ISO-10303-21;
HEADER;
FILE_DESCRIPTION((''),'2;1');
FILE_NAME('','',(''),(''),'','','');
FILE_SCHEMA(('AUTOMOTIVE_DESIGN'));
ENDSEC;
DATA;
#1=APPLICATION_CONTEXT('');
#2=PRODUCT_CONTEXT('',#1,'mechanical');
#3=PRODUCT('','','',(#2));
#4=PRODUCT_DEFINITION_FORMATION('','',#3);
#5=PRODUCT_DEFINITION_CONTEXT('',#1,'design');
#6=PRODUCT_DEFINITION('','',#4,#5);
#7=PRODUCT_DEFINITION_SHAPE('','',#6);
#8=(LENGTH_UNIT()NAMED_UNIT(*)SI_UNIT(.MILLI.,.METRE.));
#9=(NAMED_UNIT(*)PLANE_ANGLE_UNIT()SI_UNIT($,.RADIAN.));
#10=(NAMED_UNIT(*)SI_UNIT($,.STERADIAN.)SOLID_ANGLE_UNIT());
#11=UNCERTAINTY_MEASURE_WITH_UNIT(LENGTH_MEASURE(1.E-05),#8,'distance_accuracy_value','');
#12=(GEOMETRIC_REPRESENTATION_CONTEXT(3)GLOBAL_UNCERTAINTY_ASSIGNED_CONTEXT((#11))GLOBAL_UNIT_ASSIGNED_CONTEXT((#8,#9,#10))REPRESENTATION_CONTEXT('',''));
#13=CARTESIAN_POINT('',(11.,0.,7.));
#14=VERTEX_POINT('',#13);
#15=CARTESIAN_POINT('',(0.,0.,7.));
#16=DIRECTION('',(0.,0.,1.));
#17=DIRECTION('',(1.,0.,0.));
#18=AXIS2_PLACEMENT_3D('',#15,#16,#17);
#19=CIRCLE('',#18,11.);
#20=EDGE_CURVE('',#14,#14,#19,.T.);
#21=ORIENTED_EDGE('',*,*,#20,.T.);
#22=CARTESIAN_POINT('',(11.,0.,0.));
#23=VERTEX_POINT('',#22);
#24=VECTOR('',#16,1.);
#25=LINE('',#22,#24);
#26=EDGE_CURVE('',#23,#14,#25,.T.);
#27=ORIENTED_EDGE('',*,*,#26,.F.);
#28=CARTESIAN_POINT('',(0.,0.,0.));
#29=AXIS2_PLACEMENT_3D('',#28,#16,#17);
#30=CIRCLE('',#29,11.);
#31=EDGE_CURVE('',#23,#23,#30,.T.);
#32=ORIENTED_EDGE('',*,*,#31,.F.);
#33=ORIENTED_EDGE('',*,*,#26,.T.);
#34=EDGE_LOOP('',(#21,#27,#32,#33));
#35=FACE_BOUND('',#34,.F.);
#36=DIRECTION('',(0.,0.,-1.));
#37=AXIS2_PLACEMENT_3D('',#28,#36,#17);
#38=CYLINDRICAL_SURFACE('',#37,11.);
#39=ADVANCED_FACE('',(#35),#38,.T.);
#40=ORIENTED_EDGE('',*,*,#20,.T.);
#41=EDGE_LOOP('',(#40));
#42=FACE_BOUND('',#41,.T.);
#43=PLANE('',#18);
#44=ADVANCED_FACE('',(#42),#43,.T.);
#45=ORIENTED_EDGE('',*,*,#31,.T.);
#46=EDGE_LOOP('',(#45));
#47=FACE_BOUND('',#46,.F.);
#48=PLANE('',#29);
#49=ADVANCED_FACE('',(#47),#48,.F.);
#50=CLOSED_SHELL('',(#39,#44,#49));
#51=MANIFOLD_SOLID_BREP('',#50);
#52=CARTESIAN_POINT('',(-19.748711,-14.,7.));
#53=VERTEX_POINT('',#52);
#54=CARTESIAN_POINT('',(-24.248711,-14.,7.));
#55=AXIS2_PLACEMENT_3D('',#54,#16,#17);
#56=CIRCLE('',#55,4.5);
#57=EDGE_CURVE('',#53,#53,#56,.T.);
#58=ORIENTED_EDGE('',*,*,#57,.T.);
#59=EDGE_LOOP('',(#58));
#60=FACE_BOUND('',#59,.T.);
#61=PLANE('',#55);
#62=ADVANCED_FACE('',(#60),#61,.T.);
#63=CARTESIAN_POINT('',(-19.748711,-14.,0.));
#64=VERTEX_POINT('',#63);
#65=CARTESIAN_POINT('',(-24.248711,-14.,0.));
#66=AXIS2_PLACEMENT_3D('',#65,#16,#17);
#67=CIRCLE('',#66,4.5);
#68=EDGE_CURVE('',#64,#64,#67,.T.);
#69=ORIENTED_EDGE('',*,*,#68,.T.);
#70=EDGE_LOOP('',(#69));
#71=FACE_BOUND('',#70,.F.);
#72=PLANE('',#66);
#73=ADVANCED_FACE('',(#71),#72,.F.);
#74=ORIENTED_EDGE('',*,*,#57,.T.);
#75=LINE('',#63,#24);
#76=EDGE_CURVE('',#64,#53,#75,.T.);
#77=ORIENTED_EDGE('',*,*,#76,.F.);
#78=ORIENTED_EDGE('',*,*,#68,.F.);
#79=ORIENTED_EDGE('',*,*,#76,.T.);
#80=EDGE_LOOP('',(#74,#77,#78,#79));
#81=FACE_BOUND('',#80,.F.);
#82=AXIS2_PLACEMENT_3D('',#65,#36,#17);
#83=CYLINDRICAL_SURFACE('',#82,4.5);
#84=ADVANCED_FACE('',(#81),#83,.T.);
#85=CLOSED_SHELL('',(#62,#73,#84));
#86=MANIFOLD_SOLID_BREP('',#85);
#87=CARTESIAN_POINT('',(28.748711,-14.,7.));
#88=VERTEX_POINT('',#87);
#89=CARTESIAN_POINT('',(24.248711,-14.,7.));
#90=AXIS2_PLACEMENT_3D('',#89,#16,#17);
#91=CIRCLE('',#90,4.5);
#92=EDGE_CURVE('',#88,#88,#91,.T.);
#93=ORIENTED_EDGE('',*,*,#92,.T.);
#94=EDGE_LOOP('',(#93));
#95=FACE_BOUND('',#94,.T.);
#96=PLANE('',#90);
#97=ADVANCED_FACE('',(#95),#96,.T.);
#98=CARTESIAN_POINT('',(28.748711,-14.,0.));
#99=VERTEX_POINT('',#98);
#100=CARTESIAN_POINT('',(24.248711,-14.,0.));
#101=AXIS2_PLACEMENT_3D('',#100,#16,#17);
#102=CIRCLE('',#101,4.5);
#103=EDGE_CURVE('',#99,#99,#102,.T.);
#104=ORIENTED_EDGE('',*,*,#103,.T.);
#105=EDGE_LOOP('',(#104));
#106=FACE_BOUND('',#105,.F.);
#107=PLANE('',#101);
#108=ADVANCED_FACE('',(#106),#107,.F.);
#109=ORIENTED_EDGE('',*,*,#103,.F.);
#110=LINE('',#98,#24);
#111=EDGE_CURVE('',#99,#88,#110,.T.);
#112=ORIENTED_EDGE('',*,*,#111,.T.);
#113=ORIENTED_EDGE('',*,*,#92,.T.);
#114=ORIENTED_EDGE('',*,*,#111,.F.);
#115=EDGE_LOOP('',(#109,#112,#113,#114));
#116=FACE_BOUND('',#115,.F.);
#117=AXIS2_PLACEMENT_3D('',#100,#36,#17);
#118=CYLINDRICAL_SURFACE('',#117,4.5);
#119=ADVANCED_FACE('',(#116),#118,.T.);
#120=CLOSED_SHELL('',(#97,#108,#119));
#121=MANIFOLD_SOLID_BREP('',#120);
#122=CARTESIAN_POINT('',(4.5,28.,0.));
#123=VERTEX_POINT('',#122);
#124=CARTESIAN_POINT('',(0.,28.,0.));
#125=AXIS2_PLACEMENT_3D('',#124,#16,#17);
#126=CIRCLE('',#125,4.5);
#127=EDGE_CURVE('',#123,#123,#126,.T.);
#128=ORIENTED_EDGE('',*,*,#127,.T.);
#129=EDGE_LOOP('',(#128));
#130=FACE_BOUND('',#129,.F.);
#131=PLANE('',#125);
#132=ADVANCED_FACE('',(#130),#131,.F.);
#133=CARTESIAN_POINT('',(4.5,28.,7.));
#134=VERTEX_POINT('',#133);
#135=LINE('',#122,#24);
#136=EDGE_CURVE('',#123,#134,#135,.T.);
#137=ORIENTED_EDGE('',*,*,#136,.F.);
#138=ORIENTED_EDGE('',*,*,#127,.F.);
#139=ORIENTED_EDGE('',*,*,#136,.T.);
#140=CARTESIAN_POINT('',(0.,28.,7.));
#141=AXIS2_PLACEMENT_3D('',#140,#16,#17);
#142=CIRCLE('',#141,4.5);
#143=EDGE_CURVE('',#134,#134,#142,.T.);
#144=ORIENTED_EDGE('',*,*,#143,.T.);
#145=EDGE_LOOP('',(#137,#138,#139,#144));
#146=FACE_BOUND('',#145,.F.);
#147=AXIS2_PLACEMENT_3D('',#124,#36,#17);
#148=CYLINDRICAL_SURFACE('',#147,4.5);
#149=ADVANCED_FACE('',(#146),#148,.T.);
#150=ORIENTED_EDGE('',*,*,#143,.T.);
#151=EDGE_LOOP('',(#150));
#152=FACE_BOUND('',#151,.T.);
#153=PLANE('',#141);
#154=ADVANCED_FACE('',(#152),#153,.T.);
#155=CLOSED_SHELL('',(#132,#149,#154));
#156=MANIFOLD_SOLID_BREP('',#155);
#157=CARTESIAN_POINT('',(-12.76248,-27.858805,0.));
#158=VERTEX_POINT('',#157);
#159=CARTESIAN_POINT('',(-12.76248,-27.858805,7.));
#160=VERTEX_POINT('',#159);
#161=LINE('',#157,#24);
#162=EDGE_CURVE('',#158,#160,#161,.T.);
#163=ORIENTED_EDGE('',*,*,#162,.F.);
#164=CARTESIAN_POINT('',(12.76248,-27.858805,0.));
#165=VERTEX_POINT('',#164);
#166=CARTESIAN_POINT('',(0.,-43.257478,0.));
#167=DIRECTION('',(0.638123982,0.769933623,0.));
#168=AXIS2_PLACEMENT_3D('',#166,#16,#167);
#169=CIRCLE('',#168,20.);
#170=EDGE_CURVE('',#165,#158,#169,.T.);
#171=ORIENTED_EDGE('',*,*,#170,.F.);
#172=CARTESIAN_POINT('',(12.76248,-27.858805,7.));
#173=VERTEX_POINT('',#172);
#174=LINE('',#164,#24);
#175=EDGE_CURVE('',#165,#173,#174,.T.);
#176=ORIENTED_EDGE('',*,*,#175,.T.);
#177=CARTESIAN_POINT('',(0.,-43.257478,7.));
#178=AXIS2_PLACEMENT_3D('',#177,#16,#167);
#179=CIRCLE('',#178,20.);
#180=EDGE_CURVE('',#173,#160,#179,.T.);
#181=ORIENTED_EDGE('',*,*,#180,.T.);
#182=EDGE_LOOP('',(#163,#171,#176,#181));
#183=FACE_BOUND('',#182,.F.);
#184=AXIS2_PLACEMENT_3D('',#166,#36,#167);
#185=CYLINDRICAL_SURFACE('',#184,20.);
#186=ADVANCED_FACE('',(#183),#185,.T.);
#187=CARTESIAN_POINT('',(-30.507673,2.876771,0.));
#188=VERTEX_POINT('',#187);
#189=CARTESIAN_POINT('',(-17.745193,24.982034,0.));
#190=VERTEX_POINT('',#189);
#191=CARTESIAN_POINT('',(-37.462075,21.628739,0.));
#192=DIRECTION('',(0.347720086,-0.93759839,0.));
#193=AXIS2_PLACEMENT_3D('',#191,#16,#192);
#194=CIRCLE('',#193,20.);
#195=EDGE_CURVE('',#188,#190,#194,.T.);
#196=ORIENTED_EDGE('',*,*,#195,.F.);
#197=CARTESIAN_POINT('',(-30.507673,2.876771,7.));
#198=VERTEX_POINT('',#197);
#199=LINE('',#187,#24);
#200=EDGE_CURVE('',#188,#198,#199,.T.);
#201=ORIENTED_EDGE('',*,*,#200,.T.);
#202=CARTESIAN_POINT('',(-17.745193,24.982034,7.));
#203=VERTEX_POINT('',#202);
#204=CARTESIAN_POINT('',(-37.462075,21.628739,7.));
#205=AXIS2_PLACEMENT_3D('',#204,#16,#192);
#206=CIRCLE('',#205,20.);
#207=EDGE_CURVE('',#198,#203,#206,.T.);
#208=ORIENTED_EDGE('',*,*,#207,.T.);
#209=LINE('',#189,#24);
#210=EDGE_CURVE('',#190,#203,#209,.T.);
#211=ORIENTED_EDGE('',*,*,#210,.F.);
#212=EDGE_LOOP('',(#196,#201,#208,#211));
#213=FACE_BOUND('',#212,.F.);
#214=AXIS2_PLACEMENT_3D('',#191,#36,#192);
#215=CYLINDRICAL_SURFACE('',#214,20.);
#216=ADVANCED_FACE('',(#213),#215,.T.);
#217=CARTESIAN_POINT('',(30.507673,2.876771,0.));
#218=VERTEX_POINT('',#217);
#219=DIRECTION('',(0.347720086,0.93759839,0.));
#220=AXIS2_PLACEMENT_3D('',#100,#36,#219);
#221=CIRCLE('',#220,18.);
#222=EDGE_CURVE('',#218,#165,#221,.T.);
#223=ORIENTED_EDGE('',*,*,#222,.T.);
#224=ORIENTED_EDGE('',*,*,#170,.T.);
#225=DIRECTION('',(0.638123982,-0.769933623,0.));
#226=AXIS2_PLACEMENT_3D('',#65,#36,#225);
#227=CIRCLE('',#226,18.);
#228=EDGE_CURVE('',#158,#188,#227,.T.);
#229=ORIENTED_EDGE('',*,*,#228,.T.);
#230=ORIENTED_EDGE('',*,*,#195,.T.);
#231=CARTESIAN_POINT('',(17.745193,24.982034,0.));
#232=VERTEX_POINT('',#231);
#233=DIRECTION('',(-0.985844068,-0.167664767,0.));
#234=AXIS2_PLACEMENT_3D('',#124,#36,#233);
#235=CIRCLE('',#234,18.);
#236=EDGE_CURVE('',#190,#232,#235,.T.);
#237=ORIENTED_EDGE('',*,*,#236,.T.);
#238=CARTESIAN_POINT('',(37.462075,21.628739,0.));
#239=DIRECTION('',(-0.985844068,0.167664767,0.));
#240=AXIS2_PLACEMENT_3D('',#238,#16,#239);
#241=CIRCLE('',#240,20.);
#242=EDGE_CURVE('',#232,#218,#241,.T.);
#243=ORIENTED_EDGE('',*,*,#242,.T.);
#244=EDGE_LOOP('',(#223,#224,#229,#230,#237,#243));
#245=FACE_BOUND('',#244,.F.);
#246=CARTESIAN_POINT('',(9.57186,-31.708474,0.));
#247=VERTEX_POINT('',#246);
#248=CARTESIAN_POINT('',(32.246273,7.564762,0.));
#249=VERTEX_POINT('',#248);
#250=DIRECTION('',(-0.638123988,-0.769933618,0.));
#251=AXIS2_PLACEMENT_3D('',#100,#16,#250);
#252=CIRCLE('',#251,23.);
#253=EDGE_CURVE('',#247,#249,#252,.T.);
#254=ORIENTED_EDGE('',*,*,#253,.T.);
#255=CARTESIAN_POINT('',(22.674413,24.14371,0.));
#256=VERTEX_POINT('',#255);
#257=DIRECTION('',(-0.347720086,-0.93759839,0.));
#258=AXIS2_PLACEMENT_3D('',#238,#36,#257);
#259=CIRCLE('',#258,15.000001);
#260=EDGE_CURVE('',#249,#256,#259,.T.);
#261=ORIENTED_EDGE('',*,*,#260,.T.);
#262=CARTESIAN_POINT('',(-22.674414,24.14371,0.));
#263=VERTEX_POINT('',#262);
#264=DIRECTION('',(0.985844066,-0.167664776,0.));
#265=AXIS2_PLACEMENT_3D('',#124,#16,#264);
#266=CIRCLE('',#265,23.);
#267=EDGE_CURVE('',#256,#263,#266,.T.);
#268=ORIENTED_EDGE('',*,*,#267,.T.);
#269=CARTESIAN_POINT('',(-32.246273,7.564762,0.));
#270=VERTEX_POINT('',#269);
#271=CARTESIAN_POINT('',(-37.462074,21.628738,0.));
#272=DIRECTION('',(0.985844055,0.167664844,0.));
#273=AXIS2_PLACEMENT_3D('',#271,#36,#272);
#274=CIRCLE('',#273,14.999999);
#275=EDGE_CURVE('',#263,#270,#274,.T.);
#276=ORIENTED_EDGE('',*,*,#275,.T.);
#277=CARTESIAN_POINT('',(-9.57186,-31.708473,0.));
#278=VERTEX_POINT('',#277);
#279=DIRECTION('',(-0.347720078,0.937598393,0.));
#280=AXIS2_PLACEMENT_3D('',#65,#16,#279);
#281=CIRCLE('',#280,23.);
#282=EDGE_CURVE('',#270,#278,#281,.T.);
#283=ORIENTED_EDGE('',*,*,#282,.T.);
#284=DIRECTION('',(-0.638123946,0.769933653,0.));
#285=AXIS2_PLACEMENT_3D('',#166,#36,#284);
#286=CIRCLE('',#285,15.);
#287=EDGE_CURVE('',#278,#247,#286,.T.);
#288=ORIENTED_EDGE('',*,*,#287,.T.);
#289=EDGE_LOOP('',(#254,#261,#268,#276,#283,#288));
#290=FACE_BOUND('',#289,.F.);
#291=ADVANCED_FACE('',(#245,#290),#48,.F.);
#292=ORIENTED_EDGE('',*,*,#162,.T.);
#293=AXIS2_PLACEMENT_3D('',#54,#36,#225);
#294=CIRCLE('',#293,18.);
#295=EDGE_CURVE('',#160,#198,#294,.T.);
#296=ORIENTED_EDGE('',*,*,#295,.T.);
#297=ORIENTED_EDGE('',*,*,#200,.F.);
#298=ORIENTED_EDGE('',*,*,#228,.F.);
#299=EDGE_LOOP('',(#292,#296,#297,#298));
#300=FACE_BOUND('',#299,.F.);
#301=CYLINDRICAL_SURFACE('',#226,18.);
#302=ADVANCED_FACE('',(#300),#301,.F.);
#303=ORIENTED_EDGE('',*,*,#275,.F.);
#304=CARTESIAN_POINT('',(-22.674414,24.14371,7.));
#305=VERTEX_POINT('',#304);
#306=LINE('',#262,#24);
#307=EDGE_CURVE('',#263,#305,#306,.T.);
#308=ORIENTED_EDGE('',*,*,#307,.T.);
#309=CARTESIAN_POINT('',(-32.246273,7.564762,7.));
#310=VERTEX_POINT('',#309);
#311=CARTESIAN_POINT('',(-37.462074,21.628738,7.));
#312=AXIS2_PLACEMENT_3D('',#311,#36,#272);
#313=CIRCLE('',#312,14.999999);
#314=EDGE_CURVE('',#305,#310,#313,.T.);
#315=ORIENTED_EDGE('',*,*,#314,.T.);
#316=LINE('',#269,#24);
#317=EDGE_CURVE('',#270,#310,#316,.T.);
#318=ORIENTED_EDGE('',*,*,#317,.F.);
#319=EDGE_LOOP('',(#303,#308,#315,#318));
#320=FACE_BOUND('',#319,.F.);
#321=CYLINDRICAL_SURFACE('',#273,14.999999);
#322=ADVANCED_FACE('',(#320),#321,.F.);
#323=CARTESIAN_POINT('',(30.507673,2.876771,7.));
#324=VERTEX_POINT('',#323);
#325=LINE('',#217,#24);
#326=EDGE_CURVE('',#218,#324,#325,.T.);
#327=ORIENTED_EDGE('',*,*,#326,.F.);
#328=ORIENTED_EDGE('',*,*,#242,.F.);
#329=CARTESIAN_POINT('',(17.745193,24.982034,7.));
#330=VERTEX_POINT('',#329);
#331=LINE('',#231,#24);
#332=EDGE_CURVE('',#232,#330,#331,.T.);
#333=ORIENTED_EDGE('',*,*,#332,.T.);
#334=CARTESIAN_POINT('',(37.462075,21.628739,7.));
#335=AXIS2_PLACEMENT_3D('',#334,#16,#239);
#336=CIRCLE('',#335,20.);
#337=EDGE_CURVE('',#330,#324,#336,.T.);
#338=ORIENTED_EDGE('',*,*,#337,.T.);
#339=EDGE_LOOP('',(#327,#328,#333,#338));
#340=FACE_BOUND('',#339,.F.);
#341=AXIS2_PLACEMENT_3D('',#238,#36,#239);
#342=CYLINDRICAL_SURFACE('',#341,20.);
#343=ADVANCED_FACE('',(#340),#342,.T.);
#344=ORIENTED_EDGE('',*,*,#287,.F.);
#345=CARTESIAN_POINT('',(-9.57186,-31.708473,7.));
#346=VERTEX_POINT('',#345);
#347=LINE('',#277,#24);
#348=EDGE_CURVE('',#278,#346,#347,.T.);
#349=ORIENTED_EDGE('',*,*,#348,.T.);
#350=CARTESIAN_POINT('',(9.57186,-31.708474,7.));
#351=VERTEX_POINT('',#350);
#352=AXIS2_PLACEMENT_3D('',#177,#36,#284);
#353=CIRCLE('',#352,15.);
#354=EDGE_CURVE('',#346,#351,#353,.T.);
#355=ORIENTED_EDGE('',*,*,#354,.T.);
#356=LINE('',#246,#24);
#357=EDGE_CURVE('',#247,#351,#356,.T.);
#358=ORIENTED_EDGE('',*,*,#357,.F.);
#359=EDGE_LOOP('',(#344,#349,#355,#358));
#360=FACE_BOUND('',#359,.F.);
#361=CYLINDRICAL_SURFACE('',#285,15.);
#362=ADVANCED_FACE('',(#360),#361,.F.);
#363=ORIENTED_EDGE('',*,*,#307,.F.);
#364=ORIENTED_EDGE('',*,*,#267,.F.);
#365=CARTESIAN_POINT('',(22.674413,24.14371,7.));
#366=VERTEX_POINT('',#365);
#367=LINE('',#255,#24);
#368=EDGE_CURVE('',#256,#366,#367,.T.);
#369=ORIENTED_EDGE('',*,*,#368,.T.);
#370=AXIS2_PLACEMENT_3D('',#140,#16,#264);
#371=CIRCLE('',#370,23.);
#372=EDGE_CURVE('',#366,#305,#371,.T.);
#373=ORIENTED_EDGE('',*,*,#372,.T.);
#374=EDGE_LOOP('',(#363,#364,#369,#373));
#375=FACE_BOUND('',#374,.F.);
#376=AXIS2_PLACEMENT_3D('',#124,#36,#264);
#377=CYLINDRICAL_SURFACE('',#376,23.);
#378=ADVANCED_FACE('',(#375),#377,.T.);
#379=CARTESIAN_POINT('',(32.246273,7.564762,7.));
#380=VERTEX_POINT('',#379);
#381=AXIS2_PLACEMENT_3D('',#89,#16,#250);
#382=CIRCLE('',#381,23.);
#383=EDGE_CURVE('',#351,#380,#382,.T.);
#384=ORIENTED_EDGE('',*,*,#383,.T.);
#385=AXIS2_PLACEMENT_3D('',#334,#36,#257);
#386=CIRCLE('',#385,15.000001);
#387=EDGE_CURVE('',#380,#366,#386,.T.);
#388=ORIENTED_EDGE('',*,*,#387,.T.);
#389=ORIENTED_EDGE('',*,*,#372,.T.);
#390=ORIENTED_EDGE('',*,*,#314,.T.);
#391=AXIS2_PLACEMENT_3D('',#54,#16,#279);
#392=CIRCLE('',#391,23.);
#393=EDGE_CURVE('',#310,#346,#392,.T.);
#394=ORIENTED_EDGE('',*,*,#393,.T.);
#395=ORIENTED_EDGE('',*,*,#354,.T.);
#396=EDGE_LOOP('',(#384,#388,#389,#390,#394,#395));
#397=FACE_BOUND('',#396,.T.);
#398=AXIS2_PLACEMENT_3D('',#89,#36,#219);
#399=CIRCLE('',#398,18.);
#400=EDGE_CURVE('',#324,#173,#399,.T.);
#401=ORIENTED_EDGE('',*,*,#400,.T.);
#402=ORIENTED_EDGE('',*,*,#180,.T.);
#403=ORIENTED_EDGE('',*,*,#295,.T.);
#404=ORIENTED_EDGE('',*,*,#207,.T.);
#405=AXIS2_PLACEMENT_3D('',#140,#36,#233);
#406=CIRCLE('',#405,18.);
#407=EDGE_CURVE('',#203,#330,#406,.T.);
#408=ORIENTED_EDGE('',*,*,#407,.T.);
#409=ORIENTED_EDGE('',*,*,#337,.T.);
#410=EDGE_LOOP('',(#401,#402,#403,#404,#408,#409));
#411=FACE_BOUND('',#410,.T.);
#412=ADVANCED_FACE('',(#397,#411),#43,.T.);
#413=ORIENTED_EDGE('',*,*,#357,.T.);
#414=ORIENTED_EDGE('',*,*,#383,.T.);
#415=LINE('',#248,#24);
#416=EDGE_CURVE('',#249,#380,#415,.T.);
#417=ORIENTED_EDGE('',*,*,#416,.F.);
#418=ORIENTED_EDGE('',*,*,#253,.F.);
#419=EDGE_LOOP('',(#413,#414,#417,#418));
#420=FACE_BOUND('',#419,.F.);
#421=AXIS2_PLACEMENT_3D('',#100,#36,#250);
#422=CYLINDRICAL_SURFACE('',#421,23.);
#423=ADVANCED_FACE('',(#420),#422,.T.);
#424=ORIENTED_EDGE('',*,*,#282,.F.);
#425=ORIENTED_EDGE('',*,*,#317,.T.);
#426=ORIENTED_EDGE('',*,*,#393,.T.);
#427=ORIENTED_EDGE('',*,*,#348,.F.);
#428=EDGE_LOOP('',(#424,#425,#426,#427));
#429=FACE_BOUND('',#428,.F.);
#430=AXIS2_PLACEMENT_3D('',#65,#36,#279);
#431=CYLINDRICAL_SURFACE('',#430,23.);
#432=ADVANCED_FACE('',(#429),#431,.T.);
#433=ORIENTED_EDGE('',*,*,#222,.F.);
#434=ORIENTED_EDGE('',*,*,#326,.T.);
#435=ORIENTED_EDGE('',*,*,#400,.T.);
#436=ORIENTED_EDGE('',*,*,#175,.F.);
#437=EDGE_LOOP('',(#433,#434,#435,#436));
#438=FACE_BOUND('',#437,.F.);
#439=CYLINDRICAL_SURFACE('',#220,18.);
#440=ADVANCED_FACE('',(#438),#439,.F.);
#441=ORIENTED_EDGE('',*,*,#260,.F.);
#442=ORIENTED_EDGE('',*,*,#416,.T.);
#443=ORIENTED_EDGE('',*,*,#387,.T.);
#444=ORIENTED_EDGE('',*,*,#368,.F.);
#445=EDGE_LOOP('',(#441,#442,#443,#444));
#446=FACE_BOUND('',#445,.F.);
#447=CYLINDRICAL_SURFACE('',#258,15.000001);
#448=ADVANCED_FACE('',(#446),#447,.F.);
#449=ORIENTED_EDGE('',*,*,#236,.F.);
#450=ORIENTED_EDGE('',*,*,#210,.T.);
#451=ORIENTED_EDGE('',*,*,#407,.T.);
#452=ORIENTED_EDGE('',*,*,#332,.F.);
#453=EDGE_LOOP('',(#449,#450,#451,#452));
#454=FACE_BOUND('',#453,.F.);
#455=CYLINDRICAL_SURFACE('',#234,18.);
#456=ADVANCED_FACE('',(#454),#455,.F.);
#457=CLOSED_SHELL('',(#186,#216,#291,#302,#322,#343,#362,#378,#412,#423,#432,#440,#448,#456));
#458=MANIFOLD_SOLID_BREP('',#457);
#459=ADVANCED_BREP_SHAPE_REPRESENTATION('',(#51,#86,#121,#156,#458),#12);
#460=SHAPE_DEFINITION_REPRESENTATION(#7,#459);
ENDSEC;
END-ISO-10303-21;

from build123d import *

# Parameters (mm, degrees)
F1_DEPTH = 7
F0_R     = 11
F0_R_2   = 4.5


# Not quite as in the source:
# - ends of sketch curves that miss each other by under 0.0002 mm in the source are joined


with BuildPart() as f1:
    # F0 (on Top) → F1 (new body)
    with BuildSketch(Plane.XY):
        with BuildLine():
            ThreePointArc((32.2462730801, 7.5647624351), (24.4716930106, 14.1287385472), (22.6744129825, 24.1437104471))
            ThreePointArc((22.6744129825, 24.1437104471), (0, 51), (-22.6744135565, 24.1437103495))
            ThreePointArc((-22.6744135565, 24.1437103495), (-24.4716930106, 14.1287385472), (-32.2462730801, 7.5647624351))
            ThreePointArc((-32.2462730801, 7.5647624351), (-44.167295593, -25.5), (-9.571859726, -31.7084733306))
            ThreePointArc((-9.571859726, -31.7084733306), (0, -28.2574780285), (9.5718595015, -31.7084736015))
            ThreePointArc((9.5718595015, -31.7084736015), (44.167295593, -25.5), (32.2462730801, 7.5647624351))
        make_face()
        with BuildLine():
            ThreePointArc((-12.7624796347, -27.8588052153), (-39.8371685741, -23), (-30.5076728529, 2.8767710287))
            ThreePointArc((-30.5076728529, 2.8767710287), (-20.1415664959, 11.6287388383), (-17.7451932181, 24.9820341866))
            ThreePointArc((-17.7451932181, 24.9820341866), (0, 46), (17.7451932181, 24.9820341866))
            ThreePointArc((17.7451932181, 24.9820341866), (20.1415664959, 11.6287388383), (30.5076728529, 2.8767710287))
            ThreePointArc((30.5076728529, 2.8767710287), (39.8371685741, -23), (12.7624796347, -27.8588052153))
            ThreePointArc((12.7624796347, -27.8588052153), (0, -23.2574776767), (-12.7624796347, -27.8588052153))
        make_face(mode=Mode.SUBTRACT)
    extrude(amount=F1_DEPTH)


with BuildPart() as f1b:
    # F0 (on Top) → F1, piece 2 (new body)
    with BuildSketch(Plane.XY):
        Circle(F0_R)
    extrude(amount=F1_DEPTH)


with BuildPart() as f1c:
    # F0 (on Top) → F1, piece 3 (new body)
    with BuildSketch(Plane.XY):
        with Locations((-24.248711306, -14)):
            Circle(F0_R_2)
    extrude(amount=F1_DEPTH)


with BuildPart() as f1d:
    # F0 (on Top) → F1, piece 4 (new body)
    with BuildSketch(Plane.XY):
        with Locations((24.248711306, -14)):
            Circle(F0_R_2)
    extrude(amount=F1_DEPTH)


with BuildPart() as f1e:
    # F0 (on Top) → F1, piece 5 (new body)
    with BuildSketch(Plane.XY):
        with Locations((0, 28)):
            Circle(F0_R_2)
    extrude(amount=F1_DEPTH)


solid = Compound([f1.part, f1b.part, f1c.part, f1d.part, f1e.part])
